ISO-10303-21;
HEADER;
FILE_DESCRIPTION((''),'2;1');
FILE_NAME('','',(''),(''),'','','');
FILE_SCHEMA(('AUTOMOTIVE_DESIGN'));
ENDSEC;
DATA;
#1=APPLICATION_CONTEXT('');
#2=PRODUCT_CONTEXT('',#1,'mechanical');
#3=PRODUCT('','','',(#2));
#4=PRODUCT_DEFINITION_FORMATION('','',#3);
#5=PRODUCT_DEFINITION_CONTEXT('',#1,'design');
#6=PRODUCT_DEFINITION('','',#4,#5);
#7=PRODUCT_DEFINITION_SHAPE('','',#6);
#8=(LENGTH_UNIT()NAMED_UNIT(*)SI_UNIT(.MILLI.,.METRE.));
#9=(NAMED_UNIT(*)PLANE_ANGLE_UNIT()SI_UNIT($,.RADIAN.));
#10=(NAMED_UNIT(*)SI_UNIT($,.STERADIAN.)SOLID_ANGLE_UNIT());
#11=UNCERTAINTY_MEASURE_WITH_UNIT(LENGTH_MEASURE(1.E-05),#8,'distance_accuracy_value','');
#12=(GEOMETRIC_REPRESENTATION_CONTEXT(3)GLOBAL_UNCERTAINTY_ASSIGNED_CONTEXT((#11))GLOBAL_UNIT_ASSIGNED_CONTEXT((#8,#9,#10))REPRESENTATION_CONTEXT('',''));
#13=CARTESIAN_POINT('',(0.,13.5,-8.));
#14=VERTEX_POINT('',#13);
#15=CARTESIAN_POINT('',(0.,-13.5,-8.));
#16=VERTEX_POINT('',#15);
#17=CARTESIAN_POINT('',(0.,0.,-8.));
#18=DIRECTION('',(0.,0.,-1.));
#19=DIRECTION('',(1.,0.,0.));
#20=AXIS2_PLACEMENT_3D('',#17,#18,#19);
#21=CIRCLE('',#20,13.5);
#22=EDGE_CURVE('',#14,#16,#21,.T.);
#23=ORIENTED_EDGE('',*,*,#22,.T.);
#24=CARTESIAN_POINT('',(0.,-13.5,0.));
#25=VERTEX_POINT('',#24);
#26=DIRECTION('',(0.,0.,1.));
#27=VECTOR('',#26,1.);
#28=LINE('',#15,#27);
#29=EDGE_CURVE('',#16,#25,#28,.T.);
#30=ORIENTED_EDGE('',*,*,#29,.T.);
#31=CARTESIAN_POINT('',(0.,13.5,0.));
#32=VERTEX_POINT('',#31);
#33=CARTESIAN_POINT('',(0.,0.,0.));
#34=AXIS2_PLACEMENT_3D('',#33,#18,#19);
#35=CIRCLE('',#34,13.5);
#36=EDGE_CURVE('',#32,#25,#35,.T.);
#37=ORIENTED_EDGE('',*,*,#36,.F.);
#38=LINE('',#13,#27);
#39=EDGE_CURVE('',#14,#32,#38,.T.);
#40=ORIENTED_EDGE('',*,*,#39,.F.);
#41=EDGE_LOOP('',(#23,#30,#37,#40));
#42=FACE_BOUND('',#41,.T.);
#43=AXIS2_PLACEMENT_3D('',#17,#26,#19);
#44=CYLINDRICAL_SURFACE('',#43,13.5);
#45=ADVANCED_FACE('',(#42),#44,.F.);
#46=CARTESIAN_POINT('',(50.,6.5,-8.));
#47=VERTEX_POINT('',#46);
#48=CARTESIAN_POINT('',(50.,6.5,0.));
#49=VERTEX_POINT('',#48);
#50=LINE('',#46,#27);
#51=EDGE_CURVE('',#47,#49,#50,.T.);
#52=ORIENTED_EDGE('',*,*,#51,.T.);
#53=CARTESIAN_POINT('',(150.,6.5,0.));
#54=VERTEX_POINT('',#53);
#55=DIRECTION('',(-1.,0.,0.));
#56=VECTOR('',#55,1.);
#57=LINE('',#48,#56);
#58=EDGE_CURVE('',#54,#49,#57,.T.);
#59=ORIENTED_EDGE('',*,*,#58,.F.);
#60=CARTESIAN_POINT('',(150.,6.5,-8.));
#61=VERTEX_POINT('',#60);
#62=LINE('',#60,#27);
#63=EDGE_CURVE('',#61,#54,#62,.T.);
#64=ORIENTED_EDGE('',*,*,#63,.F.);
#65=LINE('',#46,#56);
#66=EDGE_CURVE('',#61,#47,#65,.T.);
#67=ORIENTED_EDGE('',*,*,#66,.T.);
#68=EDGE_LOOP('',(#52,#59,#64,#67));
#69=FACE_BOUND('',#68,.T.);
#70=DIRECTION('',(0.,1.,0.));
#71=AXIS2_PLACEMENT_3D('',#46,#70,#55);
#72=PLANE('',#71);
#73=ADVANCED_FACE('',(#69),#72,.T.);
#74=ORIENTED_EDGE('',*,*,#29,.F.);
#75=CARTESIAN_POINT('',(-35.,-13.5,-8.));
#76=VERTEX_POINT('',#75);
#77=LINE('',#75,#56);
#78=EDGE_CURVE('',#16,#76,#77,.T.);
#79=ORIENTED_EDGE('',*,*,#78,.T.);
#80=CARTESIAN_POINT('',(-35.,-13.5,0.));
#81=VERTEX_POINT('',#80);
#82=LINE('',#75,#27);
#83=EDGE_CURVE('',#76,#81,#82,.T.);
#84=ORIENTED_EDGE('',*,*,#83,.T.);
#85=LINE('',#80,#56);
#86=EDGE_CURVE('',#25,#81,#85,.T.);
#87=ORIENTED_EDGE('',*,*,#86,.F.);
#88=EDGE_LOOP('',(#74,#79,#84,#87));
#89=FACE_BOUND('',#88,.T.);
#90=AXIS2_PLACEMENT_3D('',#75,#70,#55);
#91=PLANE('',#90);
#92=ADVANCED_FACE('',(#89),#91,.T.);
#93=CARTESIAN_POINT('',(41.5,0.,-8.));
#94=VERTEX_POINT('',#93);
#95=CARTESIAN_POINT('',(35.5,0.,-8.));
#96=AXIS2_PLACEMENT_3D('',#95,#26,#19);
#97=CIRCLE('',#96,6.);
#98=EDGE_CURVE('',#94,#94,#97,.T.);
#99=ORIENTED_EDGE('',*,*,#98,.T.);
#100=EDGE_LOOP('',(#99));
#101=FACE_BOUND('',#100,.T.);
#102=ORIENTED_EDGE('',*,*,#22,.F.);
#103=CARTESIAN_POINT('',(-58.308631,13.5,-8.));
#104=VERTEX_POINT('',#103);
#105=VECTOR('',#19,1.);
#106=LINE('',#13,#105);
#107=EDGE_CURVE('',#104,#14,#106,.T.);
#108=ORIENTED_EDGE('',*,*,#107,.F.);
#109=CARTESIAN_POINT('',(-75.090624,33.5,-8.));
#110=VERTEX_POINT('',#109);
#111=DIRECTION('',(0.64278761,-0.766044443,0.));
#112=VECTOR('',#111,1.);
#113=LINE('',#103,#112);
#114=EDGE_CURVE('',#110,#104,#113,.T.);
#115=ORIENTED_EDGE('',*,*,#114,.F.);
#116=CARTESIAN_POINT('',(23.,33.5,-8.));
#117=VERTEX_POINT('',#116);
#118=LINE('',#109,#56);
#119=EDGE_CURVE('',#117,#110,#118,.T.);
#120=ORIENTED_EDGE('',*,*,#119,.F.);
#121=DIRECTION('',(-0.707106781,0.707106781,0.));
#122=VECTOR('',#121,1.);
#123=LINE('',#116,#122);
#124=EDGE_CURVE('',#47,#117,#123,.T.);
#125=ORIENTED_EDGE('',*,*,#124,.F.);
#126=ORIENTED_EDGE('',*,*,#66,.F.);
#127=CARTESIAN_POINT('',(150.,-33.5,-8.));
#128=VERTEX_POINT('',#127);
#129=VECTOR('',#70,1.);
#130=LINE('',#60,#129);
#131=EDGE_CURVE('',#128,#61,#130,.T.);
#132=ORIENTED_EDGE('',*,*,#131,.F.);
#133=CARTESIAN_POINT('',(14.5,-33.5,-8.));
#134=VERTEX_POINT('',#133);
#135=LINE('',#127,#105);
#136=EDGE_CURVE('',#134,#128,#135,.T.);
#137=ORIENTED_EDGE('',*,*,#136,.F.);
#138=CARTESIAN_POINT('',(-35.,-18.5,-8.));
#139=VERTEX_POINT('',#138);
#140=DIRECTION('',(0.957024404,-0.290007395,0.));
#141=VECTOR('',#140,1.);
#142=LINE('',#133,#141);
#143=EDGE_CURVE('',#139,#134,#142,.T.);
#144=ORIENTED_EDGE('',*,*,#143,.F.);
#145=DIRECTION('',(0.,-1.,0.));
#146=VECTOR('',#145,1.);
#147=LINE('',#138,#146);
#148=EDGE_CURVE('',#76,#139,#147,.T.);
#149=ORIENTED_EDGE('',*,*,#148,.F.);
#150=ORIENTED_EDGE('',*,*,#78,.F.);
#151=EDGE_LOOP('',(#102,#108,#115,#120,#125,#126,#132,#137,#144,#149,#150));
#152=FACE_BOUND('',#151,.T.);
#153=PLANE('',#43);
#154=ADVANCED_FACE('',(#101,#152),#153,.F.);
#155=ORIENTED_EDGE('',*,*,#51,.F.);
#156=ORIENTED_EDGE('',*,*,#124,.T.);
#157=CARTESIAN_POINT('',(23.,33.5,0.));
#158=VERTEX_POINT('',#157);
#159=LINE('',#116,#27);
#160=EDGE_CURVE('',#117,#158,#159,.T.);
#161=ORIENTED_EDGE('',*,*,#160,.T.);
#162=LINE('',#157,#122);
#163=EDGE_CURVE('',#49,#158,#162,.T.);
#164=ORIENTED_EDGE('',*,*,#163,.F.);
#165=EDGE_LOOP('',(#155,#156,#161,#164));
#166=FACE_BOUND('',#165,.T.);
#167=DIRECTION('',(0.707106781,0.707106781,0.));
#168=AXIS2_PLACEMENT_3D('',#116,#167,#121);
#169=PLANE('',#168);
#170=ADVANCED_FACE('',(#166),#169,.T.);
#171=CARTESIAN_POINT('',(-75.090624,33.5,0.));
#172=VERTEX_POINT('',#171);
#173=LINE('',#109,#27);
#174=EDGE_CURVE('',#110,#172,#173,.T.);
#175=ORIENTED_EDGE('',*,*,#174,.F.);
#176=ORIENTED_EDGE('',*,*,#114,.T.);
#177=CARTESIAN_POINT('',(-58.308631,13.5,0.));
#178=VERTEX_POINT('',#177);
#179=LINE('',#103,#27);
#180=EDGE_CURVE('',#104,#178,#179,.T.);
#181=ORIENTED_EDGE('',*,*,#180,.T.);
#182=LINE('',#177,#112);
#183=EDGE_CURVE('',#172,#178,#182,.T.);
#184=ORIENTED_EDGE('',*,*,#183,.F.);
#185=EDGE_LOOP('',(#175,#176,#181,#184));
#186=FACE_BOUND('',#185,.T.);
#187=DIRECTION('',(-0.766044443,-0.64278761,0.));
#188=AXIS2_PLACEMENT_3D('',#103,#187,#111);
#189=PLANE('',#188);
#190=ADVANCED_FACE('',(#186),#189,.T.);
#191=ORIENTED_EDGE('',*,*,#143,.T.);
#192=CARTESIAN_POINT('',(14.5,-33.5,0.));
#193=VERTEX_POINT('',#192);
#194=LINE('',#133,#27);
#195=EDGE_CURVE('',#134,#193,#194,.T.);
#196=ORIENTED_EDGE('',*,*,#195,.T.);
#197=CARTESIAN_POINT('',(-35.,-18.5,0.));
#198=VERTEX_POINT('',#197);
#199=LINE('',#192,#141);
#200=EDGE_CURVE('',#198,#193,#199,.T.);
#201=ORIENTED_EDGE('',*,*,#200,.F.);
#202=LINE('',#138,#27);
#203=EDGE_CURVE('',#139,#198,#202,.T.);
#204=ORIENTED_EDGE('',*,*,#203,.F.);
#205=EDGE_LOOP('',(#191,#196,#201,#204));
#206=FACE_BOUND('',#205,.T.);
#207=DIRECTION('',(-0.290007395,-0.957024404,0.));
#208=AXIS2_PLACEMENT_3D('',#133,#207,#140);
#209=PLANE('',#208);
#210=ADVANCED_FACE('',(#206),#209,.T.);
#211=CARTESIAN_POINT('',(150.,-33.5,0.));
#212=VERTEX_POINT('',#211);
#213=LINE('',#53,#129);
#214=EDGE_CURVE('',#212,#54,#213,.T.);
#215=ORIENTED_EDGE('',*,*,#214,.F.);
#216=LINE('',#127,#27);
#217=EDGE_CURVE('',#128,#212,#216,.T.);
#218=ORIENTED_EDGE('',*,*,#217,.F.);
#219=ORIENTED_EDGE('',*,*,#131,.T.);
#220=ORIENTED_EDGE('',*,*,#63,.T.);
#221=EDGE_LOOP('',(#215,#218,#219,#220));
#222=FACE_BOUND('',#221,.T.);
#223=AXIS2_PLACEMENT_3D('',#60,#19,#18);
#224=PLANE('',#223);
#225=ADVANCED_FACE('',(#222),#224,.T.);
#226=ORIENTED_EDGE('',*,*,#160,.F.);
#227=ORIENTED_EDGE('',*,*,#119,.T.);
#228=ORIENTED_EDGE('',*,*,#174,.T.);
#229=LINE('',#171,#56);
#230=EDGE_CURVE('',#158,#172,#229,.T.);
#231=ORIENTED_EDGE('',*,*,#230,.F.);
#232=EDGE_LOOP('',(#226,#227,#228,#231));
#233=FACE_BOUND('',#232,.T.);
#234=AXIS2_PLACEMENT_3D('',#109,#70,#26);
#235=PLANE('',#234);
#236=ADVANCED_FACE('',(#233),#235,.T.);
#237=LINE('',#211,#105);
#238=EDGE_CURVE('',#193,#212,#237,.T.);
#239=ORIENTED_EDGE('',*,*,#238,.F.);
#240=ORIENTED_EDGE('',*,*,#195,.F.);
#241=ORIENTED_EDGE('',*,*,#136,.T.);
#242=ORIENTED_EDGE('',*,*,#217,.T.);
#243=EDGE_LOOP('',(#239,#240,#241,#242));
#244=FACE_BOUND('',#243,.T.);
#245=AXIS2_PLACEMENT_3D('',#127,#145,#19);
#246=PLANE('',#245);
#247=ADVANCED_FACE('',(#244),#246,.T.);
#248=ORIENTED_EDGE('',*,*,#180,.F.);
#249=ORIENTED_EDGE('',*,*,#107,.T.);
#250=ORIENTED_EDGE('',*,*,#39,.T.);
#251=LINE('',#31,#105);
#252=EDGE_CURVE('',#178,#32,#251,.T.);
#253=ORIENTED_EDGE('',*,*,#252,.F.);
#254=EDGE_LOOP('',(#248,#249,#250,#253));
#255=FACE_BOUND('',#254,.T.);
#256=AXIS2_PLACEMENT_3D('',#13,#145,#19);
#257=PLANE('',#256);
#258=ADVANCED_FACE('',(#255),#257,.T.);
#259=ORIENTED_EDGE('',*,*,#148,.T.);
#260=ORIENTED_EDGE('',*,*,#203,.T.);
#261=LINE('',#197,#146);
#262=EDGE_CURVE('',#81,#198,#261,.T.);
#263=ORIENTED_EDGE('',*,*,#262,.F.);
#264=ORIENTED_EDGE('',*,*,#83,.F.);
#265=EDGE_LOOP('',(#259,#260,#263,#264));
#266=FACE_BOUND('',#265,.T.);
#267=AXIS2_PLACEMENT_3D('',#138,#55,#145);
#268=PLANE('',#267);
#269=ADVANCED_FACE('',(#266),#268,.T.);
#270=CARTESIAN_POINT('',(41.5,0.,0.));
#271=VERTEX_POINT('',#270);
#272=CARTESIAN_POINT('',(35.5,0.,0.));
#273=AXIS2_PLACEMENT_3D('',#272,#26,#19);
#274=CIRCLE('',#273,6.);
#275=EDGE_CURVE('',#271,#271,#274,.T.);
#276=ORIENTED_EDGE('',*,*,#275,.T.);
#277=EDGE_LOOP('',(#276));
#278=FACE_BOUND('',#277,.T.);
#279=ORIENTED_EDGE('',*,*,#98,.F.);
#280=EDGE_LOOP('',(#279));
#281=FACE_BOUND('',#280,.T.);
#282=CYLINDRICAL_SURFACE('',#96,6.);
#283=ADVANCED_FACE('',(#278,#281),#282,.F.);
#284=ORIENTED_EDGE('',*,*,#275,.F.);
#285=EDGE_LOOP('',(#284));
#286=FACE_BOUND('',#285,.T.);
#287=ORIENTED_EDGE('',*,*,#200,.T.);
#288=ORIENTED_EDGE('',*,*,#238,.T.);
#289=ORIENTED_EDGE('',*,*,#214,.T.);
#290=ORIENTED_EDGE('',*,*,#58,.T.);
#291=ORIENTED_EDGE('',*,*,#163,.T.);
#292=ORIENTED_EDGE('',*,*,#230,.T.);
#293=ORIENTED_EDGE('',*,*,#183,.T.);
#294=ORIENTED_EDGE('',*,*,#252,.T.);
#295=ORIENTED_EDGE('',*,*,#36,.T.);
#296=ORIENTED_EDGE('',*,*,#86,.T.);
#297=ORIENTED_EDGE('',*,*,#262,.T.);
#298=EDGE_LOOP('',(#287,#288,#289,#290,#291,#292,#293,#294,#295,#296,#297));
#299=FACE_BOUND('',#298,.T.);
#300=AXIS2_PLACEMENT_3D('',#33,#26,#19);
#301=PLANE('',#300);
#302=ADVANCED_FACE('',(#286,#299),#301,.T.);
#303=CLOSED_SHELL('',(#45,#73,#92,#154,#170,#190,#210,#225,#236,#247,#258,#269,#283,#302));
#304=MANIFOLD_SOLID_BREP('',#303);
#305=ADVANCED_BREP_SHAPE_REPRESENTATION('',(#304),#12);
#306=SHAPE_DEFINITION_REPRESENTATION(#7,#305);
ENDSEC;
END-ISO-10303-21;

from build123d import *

# Parameters (mm, degrees)
SKETCH_1_R             = 6
SM_BASE_FLANGE_1_DEPTH = 8


# Sheet-metal steps are written as plain solids
with BuildPart() as part:
    # Sketch 1 → Базовая кромка1 (new body)
    with BuildSketch(Plane.XY):
        with BuildLine():
            Line((-35, -13.5), (0, -13.5))
            ThreePointArc((0, -13.5), (13.5, 0), (0, 13.5))
            Line((0, 13.5), (-58.308631084, 13.5))
            Line((-58.308631084, 13.5), (-75.090623708, 33.5))
            Line((-75.090623708, 33.5), (23, 33.5))
            Line((23, 33.5), (50, 6.5))
            Line((50, 6.5), (150, 6.5))
            Line((150, 6.5), (150, -33.5))
            Line((150, -33.5), (14.5, -33.5))
            Line((14.5, -33.5), (-35, -18.5))
            Line((-35, -18.5), (-35, -13.5))
        make_face()
        with Locations((35.5, 0)):
            Circle(SKETCH_1_R, mode=Mode.SUBTRACT)
    extrude(amount=-SM_BASE_FLANGE_1_DEPTH)


solid = part.part
